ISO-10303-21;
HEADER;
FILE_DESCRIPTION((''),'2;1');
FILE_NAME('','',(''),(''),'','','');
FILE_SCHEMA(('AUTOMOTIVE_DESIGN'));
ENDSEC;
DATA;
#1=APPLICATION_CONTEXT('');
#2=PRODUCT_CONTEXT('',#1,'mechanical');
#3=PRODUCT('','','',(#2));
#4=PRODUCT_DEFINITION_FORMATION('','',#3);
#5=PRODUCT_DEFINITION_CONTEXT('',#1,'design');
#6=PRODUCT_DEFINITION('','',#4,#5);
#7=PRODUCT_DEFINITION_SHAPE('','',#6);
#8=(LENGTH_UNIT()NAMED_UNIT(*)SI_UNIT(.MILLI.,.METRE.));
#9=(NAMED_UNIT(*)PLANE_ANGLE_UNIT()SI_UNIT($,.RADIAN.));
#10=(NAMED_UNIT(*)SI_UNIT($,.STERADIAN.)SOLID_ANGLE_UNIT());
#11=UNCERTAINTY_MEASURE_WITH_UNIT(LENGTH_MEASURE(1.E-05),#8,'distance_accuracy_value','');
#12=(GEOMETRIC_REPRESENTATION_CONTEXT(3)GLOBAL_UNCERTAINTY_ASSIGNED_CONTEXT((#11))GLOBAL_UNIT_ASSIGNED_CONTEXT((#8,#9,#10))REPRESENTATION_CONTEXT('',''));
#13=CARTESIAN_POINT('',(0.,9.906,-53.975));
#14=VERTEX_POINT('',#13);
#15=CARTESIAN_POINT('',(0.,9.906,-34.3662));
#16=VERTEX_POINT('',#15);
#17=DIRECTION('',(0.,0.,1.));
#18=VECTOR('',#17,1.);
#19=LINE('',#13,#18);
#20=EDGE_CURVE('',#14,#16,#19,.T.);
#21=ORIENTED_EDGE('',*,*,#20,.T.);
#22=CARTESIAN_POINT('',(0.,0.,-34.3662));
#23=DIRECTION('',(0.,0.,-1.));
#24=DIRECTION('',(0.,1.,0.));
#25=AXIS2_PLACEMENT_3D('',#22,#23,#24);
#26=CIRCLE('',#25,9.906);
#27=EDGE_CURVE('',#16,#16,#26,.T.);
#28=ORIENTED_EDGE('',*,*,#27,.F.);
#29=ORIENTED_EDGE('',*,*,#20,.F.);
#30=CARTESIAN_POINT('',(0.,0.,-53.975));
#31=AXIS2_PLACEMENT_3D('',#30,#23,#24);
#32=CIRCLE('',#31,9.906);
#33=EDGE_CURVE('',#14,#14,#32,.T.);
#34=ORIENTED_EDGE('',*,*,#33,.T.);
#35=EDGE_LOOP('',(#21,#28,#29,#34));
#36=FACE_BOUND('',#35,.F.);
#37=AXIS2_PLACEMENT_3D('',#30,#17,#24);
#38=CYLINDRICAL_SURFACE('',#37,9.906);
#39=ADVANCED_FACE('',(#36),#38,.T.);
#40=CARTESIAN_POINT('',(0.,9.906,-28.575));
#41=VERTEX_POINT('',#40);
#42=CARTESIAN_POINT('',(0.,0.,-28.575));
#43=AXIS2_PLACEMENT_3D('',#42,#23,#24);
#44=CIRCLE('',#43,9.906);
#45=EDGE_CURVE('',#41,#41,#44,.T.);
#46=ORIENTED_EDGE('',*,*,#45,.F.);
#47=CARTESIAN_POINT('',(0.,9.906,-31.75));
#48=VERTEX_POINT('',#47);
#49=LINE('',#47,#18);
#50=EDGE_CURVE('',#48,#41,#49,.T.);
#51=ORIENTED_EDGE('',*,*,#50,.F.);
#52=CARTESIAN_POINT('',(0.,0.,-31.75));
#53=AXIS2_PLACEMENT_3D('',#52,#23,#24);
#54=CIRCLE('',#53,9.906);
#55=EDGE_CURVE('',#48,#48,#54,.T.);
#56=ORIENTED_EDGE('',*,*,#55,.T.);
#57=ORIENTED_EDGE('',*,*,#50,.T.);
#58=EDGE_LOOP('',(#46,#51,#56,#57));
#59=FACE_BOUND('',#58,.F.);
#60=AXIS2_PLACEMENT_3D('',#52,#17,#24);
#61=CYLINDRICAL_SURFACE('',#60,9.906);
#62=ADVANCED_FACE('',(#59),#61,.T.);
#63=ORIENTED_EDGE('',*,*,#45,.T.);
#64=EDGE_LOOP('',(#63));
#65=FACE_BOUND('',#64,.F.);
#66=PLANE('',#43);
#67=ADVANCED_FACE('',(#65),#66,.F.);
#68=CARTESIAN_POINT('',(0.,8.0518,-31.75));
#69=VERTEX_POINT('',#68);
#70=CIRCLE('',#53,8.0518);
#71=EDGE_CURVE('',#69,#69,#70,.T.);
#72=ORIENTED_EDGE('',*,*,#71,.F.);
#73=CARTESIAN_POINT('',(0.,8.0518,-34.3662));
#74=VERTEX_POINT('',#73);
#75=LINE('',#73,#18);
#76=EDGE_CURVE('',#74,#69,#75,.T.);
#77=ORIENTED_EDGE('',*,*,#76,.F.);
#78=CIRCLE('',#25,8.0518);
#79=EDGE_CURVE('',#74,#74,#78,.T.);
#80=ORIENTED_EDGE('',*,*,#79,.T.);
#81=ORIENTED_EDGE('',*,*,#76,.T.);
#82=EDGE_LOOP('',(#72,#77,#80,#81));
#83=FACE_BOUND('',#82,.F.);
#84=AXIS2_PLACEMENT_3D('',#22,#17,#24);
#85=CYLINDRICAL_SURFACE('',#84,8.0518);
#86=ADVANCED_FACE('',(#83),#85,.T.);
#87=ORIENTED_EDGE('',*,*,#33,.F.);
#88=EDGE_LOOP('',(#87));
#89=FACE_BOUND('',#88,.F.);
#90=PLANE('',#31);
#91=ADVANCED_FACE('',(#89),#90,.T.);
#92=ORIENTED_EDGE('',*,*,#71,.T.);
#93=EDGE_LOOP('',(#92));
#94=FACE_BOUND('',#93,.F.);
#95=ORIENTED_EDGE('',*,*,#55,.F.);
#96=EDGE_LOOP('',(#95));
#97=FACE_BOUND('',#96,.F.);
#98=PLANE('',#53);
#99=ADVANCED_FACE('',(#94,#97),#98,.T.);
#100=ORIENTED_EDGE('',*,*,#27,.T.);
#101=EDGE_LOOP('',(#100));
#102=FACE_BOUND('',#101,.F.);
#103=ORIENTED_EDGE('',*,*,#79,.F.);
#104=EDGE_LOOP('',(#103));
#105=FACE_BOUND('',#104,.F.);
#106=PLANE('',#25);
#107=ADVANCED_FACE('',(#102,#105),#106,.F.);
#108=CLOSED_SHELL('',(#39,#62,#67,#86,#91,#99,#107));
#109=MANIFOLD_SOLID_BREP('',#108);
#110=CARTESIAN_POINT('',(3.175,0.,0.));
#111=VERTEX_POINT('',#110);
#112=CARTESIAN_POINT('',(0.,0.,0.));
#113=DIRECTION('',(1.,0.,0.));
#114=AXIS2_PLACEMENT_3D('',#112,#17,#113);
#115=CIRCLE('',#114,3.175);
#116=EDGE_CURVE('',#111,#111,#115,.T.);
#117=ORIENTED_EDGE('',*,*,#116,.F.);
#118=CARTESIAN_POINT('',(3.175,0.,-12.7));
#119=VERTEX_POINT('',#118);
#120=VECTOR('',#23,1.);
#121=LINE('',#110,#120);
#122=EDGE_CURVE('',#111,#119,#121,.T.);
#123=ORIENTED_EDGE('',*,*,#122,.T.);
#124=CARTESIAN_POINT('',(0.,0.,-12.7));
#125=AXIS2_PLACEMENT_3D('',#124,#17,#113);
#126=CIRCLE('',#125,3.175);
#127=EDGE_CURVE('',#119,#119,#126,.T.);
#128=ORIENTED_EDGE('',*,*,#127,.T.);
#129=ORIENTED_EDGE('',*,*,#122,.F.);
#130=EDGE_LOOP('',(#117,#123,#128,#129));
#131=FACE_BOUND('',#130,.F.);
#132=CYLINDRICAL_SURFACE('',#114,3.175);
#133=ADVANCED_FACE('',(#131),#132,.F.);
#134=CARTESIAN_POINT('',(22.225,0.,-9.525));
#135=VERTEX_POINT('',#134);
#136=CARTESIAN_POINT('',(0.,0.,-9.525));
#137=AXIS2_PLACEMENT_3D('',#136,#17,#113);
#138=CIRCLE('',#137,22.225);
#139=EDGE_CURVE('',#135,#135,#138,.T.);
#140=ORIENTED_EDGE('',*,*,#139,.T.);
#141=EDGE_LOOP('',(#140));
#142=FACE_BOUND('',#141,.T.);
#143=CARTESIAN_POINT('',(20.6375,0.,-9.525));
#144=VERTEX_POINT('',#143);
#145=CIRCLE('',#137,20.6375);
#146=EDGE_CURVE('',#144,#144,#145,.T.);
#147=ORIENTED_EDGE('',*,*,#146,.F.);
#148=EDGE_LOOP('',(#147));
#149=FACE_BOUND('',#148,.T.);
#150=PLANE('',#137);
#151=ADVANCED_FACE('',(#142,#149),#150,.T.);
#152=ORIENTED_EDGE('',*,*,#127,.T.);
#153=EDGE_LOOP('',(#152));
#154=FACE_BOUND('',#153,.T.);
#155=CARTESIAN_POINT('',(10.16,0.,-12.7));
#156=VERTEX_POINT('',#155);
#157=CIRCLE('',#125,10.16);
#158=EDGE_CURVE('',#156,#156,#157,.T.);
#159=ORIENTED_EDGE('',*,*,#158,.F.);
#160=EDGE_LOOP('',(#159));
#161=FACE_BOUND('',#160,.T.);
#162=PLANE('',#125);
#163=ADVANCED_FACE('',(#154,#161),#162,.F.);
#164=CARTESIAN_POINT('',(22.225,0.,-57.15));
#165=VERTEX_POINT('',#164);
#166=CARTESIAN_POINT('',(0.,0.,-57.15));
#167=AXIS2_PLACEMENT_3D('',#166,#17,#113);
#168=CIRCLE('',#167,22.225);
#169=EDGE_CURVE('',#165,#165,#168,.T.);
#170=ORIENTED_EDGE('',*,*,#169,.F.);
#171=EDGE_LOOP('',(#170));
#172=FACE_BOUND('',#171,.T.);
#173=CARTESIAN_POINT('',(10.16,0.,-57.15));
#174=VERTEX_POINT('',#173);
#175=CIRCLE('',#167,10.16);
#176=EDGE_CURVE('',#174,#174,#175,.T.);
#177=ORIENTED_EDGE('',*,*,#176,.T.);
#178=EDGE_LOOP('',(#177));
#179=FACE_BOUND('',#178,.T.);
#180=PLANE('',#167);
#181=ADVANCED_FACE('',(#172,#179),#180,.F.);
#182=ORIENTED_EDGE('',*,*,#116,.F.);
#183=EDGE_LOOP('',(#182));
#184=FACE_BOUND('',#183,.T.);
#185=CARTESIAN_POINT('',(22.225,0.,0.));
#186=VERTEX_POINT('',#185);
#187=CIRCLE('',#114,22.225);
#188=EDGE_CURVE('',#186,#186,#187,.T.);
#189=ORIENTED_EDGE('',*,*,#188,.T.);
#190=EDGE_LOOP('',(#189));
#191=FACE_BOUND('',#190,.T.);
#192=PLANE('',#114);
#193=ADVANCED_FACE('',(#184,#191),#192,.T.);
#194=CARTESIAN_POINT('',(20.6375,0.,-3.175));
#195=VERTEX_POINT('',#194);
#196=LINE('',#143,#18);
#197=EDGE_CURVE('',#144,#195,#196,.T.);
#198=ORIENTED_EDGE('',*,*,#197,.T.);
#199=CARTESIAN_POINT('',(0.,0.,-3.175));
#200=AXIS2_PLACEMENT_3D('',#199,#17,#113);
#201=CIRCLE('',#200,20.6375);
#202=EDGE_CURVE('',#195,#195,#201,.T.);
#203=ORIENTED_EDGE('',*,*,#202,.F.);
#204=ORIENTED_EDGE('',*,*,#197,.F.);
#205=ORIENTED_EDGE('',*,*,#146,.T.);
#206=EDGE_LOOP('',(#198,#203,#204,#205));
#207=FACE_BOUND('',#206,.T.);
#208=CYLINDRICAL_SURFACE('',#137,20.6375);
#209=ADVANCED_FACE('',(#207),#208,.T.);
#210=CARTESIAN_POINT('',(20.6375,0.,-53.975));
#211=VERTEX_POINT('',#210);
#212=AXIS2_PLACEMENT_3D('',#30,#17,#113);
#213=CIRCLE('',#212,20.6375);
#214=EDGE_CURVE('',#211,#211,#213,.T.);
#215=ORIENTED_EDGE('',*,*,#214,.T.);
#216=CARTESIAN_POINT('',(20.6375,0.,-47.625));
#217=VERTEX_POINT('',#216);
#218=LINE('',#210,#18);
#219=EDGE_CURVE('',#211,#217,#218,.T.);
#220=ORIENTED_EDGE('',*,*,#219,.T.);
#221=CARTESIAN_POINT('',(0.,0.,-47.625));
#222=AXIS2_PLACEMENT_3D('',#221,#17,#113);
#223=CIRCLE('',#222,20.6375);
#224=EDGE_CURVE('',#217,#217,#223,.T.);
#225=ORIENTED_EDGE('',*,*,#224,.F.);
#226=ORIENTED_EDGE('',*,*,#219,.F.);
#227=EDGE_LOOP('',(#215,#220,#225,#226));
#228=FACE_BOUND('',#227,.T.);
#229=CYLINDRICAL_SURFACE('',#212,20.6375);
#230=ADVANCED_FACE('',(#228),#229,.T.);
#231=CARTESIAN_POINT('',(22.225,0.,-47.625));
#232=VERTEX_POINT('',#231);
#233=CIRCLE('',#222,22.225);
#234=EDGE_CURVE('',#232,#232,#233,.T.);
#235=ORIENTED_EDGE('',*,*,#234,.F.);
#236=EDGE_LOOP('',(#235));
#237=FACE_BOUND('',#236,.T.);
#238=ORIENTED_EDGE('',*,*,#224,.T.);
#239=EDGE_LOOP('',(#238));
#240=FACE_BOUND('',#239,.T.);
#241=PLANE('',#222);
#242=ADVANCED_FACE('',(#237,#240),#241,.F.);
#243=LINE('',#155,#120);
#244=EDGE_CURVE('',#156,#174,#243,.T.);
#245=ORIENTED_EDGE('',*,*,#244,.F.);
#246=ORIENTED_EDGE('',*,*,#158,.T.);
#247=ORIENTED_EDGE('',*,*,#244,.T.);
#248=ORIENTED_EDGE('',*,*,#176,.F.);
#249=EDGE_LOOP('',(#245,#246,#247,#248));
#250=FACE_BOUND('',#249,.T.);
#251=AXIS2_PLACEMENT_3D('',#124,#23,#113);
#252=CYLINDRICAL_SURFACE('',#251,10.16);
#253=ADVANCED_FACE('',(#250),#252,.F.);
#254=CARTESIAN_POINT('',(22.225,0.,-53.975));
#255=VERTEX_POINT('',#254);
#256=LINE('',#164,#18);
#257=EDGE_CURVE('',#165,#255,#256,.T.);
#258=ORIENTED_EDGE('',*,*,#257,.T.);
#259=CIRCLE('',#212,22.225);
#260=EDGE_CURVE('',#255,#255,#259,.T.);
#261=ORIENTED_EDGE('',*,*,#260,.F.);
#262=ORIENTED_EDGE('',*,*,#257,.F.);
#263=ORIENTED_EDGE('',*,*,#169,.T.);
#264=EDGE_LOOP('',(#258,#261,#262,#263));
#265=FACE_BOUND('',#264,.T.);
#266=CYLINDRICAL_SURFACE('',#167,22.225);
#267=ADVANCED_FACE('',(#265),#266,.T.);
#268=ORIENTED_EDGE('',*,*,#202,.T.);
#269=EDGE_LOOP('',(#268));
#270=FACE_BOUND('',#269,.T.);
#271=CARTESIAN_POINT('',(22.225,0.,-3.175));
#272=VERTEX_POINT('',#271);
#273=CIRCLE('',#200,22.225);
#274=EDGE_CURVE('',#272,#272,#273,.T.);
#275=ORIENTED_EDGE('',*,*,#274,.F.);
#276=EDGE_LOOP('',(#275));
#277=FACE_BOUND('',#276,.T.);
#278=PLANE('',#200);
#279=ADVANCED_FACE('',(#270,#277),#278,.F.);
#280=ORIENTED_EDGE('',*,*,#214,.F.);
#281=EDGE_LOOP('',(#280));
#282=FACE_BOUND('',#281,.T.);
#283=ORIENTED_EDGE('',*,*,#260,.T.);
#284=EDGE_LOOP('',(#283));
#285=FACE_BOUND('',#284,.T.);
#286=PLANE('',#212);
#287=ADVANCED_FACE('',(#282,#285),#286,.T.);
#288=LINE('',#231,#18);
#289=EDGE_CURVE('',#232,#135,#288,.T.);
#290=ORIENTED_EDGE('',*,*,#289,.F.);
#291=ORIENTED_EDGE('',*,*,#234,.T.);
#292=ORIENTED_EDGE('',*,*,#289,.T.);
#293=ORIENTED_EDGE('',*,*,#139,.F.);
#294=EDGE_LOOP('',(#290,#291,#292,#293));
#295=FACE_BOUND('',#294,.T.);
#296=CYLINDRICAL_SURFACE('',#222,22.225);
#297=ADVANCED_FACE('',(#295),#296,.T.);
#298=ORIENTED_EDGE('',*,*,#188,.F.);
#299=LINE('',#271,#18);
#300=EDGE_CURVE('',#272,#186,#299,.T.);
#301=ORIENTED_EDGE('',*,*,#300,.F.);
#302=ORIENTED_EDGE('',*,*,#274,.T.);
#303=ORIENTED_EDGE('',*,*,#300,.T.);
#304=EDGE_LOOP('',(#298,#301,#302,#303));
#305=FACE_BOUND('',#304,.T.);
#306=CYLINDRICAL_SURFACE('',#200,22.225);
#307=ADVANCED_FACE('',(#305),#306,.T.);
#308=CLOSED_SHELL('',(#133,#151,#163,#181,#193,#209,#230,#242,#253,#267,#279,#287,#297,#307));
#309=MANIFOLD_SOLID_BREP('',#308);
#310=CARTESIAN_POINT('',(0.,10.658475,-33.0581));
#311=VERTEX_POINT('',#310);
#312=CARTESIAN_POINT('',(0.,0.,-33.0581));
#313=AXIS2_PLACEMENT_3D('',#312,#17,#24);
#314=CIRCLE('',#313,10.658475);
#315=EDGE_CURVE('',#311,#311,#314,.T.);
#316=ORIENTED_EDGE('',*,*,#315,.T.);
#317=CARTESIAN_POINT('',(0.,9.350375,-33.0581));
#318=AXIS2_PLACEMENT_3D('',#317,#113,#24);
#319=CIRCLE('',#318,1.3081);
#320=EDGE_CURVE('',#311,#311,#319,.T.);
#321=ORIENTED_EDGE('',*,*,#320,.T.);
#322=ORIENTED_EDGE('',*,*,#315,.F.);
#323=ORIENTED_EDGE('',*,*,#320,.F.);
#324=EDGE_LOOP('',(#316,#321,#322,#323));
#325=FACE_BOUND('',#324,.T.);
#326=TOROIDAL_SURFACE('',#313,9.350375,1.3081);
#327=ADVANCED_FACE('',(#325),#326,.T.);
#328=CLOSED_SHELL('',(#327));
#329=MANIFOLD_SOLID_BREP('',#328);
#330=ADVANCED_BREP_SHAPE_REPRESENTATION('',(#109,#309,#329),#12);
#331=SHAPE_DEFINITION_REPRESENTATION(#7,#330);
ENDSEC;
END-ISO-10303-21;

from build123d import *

# Parameters (mm, degrees)
F4_R     = 3.175
F5_DEPTH = 57.151
F6_R     = 1.3081


with BuildPart() as f1:
    # F0 (on Front) → F1 (revolve)
    with BuildSketch(Plane.XZ):
        Polygon((22.225, 0), (0, 0), (0, -12.7), (10.16, -12.7), (10.16, -57.15), (22.225, -57.15), (22.225, -53.975), (20.6375, -53.975), (20.6375, -47.625), (22.225, -47.625), (22.225, -9.525), (20.6375, -9.525), (20.6375, -3.175), (22.225, -3.175), align=None)
    revolve(axis=Axis((0, 0, -6.35), (0, 0, 1)))

    # F4 (on face) → F5 (cut, through all)
    with BuildSketch(Plane.XY):
        Circle(F4_R)
    extrude(amount=-F5_DEPTH, mode=Mode.SUBTRACT)


with BuildPart() as f3:
    # F2 (on Right) → F3 (revolve)
    with BuildSketch(Plane.YZ):
        Polygon((9.906, -28.575), (0, -28.575), (0, -53.975), (9.906, -53.975), (9.906, -34.3662), (8.0518, -34.3662), (8.0518, -31.75), (9.906, -31.75), align=None)
    revolve(axis=Axis((0, 0, -41.275), (0, 0, -1)))


with BuildPart() as f7:
    # F6 (on Right) → F7 (revolve)
    with BuildSketch(Plane.YZ):
        with Locations((9.350375, -33.0581)):
            Circle(F6_R)
    revolve(axis=Axis((0, 0, -30.0969633236), (0, 0, 1)))


solid = Compound([f1.part, f3.part, f7.part])
